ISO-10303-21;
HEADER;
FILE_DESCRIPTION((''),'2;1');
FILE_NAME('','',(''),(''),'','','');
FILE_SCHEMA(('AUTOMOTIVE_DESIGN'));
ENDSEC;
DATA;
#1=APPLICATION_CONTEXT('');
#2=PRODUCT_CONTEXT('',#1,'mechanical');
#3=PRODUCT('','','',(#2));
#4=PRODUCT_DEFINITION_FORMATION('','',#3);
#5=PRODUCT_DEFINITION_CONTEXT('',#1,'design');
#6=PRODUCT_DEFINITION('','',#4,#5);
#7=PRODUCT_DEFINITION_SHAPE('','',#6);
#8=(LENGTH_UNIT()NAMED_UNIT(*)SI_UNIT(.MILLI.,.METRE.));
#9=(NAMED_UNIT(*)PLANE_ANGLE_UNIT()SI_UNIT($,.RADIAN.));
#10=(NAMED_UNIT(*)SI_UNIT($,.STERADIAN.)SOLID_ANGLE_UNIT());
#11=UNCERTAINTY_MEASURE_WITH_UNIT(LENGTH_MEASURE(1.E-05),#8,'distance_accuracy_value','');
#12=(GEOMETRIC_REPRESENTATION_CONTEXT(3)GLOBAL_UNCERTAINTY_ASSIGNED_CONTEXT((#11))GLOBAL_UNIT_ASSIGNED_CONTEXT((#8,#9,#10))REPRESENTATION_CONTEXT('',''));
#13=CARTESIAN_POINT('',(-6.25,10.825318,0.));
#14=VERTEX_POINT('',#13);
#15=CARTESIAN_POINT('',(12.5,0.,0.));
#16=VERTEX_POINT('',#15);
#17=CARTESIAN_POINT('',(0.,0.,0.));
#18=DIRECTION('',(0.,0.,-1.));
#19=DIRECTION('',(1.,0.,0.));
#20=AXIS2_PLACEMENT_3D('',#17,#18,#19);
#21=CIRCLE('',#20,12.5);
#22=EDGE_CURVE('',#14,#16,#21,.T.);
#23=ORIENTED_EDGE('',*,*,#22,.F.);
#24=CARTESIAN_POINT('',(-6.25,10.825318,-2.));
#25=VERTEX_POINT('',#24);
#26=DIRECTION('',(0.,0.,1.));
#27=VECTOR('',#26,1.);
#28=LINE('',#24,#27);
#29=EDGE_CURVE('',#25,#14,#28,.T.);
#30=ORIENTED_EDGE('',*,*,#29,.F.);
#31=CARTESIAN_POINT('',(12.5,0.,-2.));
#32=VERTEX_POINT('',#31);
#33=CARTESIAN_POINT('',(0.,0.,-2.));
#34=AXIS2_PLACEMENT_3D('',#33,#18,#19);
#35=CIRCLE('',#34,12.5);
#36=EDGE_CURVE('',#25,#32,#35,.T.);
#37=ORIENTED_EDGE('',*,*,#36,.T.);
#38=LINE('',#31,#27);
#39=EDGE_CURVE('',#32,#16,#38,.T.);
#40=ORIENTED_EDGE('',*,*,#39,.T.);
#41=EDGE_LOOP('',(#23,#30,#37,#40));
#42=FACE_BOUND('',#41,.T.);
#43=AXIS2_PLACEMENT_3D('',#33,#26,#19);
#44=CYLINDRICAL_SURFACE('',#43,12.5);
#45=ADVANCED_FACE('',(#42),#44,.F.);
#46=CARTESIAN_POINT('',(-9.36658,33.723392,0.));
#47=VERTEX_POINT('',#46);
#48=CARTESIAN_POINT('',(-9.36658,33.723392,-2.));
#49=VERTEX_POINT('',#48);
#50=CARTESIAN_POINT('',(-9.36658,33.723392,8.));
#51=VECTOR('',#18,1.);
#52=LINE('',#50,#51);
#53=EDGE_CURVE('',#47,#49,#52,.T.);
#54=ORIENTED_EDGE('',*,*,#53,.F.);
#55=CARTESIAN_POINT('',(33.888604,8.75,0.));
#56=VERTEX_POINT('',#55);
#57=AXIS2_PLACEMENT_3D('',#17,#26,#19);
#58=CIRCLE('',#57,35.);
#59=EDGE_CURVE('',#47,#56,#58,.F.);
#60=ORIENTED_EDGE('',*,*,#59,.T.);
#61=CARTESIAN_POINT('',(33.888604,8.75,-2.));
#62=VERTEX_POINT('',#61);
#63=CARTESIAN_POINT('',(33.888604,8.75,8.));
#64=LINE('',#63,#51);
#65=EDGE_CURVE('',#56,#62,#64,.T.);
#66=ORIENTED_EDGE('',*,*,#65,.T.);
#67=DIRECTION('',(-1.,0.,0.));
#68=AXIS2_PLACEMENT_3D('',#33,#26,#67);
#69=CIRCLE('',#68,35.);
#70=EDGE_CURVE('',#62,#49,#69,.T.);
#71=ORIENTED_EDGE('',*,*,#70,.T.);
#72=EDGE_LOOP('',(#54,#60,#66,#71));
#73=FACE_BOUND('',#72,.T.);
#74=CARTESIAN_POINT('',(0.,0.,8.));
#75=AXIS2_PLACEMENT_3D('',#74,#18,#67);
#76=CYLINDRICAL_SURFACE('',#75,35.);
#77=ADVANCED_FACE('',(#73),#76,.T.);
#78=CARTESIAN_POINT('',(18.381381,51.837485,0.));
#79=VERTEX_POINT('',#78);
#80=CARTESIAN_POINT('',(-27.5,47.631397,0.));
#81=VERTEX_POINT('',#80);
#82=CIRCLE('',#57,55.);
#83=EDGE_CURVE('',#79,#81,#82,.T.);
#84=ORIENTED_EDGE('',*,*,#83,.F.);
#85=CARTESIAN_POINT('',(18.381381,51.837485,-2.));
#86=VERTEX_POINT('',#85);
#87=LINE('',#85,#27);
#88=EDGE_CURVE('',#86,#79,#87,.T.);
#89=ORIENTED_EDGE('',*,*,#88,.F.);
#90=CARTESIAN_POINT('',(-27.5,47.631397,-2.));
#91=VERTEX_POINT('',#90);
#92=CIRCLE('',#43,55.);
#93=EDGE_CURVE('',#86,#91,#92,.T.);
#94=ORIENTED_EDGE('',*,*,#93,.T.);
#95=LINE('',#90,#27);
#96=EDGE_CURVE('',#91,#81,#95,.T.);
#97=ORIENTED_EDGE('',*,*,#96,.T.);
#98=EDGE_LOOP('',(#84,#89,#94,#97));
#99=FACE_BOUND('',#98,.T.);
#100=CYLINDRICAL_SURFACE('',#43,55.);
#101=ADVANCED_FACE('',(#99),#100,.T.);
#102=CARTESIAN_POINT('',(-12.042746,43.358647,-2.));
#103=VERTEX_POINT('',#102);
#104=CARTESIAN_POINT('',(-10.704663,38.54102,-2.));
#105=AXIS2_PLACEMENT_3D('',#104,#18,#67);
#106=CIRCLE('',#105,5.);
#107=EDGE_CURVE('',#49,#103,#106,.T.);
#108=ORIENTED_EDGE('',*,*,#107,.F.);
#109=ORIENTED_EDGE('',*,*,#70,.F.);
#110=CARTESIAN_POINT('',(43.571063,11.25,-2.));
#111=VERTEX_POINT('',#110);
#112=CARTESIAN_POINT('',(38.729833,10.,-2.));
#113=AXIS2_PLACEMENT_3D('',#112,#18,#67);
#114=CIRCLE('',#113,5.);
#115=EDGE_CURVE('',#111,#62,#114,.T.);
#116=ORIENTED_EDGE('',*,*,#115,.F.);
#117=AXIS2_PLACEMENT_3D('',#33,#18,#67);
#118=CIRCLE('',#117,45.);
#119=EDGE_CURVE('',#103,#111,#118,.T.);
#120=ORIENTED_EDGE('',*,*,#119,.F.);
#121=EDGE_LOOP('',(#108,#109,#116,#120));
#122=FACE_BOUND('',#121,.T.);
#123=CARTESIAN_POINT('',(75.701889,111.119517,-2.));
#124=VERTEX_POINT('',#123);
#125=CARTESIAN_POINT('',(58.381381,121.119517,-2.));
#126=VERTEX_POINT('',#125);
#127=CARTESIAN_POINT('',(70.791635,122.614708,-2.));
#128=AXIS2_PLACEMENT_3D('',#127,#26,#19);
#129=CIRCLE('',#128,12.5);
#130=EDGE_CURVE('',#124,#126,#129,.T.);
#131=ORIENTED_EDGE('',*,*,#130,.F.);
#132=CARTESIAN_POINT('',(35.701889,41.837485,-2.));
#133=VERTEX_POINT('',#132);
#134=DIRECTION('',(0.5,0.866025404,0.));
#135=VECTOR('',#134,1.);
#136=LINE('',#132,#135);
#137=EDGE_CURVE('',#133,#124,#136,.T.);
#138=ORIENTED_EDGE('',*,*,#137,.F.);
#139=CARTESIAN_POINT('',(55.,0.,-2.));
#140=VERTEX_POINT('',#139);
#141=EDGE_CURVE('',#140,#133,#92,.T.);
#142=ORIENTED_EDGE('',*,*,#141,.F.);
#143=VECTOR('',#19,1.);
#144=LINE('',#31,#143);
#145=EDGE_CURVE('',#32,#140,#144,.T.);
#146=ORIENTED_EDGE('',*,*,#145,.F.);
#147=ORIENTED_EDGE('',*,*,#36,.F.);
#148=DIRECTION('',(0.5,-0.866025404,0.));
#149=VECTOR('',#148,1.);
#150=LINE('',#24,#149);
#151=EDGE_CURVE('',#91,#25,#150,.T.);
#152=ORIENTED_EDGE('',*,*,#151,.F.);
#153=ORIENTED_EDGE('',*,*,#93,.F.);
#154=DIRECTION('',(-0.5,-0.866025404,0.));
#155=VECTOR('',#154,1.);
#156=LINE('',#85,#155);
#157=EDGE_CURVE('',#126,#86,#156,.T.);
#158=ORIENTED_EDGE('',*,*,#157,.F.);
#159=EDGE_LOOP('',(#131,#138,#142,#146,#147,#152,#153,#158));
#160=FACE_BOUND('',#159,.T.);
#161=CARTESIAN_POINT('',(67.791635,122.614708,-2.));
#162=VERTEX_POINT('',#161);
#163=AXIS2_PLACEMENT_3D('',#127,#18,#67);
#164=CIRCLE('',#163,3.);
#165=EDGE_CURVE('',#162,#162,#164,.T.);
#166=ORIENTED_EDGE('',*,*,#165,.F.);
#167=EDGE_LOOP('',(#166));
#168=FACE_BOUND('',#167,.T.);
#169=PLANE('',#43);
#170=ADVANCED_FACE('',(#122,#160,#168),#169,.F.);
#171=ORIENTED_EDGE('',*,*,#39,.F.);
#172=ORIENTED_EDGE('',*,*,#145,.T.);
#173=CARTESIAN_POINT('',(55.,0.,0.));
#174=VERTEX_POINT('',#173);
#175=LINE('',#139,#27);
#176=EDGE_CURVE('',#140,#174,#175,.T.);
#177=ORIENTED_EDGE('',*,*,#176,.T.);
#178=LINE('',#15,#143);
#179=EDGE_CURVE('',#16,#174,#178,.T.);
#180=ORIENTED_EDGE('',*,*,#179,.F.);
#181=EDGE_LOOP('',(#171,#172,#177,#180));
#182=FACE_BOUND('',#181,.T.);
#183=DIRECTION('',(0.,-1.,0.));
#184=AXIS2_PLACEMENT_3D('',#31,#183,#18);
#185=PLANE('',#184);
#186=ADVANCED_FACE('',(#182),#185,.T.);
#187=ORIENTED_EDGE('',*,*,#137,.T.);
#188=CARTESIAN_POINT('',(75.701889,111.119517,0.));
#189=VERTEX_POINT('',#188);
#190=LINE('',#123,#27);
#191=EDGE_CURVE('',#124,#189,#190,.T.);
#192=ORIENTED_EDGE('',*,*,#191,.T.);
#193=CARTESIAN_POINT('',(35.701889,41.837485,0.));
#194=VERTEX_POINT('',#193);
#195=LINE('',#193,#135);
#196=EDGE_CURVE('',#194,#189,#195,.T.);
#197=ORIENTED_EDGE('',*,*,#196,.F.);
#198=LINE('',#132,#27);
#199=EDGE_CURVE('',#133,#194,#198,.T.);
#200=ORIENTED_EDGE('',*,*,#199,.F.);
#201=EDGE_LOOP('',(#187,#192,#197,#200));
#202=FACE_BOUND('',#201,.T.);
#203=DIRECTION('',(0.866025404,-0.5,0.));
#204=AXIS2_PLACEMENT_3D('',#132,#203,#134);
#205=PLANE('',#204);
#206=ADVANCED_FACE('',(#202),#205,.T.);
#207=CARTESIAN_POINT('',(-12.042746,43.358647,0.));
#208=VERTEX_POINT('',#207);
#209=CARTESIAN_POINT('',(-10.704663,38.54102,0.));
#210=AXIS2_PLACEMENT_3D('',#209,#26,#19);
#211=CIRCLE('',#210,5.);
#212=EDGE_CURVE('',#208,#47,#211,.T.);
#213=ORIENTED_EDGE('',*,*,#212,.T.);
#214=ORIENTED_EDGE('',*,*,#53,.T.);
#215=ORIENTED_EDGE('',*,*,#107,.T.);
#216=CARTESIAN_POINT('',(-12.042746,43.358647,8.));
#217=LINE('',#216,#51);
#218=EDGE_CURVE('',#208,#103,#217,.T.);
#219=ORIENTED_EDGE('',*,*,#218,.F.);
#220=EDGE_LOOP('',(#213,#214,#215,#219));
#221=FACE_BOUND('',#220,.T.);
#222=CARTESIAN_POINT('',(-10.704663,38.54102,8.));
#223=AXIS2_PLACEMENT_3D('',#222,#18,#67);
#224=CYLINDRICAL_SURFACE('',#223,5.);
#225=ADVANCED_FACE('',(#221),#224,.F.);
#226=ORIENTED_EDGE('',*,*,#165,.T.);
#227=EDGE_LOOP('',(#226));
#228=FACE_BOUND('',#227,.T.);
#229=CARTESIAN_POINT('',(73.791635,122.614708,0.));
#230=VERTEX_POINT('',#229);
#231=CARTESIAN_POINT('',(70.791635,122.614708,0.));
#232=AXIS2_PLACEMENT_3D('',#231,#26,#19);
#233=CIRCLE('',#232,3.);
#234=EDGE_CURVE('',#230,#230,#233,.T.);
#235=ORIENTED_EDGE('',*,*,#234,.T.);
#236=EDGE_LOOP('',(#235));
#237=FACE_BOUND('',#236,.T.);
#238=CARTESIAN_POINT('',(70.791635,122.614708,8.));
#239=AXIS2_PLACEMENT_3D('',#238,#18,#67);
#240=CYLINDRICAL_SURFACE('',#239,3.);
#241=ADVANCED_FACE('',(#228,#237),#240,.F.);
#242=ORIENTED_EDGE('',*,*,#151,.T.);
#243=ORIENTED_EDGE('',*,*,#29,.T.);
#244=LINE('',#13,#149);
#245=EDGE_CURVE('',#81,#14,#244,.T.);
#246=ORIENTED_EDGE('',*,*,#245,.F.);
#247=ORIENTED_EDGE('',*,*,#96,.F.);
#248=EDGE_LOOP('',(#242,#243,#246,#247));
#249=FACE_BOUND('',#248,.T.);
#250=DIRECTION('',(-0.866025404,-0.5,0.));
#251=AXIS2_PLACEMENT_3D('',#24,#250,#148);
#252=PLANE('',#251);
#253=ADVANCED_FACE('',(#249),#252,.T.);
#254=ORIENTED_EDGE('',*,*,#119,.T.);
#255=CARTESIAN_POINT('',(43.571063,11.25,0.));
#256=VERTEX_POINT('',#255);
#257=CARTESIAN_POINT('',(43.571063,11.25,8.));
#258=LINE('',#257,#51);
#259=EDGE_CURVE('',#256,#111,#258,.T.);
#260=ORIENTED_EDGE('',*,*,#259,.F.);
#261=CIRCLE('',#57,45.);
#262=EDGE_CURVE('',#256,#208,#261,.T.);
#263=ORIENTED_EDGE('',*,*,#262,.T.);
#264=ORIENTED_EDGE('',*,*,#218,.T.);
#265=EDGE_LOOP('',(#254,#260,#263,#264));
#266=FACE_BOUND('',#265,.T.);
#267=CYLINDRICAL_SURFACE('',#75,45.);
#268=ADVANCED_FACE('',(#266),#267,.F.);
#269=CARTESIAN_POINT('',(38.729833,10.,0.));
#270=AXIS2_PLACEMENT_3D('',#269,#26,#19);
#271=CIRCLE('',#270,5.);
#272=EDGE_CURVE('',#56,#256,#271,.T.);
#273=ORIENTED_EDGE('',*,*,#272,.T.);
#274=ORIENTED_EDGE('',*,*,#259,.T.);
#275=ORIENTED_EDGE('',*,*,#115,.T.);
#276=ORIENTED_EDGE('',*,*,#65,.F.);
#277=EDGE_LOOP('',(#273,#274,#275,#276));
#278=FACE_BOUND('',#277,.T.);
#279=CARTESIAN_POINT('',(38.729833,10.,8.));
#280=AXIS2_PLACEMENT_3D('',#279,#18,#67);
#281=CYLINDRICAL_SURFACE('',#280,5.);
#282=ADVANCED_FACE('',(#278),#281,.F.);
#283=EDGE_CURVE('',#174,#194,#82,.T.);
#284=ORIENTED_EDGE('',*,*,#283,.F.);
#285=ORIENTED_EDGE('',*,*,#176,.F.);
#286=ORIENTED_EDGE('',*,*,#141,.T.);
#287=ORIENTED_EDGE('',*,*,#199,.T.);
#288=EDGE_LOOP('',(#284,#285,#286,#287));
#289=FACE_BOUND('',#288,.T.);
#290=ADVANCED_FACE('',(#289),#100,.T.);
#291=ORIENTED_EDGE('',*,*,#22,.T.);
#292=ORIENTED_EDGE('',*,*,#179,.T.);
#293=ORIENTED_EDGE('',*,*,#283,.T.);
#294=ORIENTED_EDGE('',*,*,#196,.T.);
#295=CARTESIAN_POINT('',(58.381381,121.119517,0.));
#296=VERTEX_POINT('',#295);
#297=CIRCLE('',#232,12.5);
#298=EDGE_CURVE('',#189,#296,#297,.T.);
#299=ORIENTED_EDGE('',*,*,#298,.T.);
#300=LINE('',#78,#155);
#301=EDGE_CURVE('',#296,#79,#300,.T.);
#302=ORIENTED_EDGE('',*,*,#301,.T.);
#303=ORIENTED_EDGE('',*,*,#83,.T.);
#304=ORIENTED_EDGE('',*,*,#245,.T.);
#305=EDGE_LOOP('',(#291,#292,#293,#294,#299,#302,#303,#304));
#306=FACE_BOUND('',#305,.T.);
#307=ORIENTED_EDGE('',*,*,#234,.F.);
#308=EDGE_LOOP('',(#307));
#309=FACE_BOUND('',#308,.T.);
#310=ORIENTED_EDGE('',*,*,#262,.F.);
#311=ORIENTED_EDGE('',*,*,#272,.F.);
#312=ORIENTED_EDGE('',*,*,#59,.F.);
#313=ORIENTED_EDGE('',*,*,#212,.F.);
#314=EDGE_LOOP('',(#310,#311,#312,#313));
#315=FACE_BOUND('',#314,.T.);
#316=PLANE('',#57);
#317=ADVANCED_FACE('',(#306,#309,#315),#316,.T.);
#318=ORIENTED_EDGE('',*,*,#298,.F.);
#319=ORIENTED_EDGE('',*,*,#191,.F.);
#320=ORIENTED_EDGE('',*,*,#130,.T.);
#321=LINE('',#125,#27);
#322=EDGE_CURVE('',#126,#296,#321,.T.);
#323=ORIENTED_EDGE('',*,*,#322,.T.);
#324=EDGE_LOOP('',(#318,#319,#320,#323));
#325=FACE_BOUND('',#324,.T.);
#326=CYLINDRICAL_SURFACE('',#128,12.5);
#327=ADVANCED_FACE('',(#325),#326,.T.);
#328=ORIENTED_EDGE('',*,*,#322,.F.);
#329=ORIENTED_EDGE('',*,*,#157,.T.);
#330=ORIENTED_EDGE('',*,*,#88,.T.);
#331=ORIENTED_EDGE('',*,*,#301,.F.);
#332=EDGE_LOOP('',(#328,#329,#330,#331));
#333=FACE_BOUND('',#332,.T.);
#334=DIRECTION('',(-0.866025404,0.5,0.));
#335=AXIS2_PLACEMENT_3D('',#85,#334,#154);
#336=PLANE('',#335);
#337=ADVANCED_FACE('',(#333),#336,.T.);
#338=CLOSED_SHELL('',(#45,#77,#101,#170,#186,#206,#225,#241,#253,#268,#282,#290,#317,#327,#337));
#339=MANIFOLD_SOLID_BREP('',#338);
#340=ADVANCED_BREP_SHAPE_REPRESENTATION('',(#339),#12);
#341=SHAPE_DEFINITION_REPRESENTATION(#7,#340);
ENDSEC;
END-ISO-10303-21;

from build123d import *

# Parameters (mm, degrees)
BASE_FLANGE1_DEPTH = 2
CUT_EXTRUDE1_DEPTH = 10
SKETCH9_R          = 3
CUT_EXTRUDE2_DEPTH = 10


# Sheet-metal steps are written as plain solids
with BuildPart() as part:
    # Sketch1 → Base-Flange1 (new body)
    with BuildSketch(Plane.XY):
        with BuildLine():
            Line((12.5, 0), (55, 0))
            ThreePointArc((55, 0), (49.942986861, 23.036884846), (35.701888604, 41.837484988))
            Line((35.701888604, 41.837484988), (75.701888604, 111.119517291))
            ThreePointArc((75.701888604, 111.119517291), (77.041634566, 133.440025366), (58.381380528, 121.119517291))
            Line((58.381380528, 121.119517291), (18.381380528, 51.837484988))
            ThreePointArc((18.381380528, 51.837484988), (-5.02096593, 54.770337785), (-27.5, 47.631397208))
            Line((-27.5, 47.631397208), (-6.25, 10.825317547))
            ThreePointArc((-6.25, 10.825317547), (6.25, 10.825317547), (12.5, 0))
        make_face()
    extrude(amount=-BASE_FLANGE1_DEPTH)

    # Sketch6 → Cut-Extrude1 (cut)
    with BuildSketch(Plane(origin=(0, 0, -2), x_dir=(-1, 0, 0), z_dir=(0, 0, -1))):
        with BuildLine():
            ThreePointArc((12.04274553, 43.35864712), (-22.5, 38.97114317), (-43.571062645, 11.25))
            ThreePointArc((-43.571062645, 11.25), (-39.979833462, 5.158770817), (-33.888604279, 8.75))
            ThreePointArc((-33.888604279, 8.75), (-17.5, 30.310889132), (9.366579857, 33.723392205))
            ThreePointArc((9.366579857, 33.723392205), (15.522290151, 37.202936826), (12.04274553, 43.35864712))
        make_face()
    extrude(amount=-CUT_EXTRUDE1_DEPTH, mode=Mode.SUBTRACT)

    # Sketch9 → Cut-Extrude2 (cut)
    with BuildSketch(Plane(origin=(0, 0, -2), x_dir=(-1, 0, 0), z_dir=(0, 0, -1))):
        with Locations((-70.791634566, 122.614707819)):
            Circle(SKETCH9_R)
    extrude(amount=-CUT_EXTRUDE2_DEPTH, mode=Mode.SUBTRACT)


solid = part.part
